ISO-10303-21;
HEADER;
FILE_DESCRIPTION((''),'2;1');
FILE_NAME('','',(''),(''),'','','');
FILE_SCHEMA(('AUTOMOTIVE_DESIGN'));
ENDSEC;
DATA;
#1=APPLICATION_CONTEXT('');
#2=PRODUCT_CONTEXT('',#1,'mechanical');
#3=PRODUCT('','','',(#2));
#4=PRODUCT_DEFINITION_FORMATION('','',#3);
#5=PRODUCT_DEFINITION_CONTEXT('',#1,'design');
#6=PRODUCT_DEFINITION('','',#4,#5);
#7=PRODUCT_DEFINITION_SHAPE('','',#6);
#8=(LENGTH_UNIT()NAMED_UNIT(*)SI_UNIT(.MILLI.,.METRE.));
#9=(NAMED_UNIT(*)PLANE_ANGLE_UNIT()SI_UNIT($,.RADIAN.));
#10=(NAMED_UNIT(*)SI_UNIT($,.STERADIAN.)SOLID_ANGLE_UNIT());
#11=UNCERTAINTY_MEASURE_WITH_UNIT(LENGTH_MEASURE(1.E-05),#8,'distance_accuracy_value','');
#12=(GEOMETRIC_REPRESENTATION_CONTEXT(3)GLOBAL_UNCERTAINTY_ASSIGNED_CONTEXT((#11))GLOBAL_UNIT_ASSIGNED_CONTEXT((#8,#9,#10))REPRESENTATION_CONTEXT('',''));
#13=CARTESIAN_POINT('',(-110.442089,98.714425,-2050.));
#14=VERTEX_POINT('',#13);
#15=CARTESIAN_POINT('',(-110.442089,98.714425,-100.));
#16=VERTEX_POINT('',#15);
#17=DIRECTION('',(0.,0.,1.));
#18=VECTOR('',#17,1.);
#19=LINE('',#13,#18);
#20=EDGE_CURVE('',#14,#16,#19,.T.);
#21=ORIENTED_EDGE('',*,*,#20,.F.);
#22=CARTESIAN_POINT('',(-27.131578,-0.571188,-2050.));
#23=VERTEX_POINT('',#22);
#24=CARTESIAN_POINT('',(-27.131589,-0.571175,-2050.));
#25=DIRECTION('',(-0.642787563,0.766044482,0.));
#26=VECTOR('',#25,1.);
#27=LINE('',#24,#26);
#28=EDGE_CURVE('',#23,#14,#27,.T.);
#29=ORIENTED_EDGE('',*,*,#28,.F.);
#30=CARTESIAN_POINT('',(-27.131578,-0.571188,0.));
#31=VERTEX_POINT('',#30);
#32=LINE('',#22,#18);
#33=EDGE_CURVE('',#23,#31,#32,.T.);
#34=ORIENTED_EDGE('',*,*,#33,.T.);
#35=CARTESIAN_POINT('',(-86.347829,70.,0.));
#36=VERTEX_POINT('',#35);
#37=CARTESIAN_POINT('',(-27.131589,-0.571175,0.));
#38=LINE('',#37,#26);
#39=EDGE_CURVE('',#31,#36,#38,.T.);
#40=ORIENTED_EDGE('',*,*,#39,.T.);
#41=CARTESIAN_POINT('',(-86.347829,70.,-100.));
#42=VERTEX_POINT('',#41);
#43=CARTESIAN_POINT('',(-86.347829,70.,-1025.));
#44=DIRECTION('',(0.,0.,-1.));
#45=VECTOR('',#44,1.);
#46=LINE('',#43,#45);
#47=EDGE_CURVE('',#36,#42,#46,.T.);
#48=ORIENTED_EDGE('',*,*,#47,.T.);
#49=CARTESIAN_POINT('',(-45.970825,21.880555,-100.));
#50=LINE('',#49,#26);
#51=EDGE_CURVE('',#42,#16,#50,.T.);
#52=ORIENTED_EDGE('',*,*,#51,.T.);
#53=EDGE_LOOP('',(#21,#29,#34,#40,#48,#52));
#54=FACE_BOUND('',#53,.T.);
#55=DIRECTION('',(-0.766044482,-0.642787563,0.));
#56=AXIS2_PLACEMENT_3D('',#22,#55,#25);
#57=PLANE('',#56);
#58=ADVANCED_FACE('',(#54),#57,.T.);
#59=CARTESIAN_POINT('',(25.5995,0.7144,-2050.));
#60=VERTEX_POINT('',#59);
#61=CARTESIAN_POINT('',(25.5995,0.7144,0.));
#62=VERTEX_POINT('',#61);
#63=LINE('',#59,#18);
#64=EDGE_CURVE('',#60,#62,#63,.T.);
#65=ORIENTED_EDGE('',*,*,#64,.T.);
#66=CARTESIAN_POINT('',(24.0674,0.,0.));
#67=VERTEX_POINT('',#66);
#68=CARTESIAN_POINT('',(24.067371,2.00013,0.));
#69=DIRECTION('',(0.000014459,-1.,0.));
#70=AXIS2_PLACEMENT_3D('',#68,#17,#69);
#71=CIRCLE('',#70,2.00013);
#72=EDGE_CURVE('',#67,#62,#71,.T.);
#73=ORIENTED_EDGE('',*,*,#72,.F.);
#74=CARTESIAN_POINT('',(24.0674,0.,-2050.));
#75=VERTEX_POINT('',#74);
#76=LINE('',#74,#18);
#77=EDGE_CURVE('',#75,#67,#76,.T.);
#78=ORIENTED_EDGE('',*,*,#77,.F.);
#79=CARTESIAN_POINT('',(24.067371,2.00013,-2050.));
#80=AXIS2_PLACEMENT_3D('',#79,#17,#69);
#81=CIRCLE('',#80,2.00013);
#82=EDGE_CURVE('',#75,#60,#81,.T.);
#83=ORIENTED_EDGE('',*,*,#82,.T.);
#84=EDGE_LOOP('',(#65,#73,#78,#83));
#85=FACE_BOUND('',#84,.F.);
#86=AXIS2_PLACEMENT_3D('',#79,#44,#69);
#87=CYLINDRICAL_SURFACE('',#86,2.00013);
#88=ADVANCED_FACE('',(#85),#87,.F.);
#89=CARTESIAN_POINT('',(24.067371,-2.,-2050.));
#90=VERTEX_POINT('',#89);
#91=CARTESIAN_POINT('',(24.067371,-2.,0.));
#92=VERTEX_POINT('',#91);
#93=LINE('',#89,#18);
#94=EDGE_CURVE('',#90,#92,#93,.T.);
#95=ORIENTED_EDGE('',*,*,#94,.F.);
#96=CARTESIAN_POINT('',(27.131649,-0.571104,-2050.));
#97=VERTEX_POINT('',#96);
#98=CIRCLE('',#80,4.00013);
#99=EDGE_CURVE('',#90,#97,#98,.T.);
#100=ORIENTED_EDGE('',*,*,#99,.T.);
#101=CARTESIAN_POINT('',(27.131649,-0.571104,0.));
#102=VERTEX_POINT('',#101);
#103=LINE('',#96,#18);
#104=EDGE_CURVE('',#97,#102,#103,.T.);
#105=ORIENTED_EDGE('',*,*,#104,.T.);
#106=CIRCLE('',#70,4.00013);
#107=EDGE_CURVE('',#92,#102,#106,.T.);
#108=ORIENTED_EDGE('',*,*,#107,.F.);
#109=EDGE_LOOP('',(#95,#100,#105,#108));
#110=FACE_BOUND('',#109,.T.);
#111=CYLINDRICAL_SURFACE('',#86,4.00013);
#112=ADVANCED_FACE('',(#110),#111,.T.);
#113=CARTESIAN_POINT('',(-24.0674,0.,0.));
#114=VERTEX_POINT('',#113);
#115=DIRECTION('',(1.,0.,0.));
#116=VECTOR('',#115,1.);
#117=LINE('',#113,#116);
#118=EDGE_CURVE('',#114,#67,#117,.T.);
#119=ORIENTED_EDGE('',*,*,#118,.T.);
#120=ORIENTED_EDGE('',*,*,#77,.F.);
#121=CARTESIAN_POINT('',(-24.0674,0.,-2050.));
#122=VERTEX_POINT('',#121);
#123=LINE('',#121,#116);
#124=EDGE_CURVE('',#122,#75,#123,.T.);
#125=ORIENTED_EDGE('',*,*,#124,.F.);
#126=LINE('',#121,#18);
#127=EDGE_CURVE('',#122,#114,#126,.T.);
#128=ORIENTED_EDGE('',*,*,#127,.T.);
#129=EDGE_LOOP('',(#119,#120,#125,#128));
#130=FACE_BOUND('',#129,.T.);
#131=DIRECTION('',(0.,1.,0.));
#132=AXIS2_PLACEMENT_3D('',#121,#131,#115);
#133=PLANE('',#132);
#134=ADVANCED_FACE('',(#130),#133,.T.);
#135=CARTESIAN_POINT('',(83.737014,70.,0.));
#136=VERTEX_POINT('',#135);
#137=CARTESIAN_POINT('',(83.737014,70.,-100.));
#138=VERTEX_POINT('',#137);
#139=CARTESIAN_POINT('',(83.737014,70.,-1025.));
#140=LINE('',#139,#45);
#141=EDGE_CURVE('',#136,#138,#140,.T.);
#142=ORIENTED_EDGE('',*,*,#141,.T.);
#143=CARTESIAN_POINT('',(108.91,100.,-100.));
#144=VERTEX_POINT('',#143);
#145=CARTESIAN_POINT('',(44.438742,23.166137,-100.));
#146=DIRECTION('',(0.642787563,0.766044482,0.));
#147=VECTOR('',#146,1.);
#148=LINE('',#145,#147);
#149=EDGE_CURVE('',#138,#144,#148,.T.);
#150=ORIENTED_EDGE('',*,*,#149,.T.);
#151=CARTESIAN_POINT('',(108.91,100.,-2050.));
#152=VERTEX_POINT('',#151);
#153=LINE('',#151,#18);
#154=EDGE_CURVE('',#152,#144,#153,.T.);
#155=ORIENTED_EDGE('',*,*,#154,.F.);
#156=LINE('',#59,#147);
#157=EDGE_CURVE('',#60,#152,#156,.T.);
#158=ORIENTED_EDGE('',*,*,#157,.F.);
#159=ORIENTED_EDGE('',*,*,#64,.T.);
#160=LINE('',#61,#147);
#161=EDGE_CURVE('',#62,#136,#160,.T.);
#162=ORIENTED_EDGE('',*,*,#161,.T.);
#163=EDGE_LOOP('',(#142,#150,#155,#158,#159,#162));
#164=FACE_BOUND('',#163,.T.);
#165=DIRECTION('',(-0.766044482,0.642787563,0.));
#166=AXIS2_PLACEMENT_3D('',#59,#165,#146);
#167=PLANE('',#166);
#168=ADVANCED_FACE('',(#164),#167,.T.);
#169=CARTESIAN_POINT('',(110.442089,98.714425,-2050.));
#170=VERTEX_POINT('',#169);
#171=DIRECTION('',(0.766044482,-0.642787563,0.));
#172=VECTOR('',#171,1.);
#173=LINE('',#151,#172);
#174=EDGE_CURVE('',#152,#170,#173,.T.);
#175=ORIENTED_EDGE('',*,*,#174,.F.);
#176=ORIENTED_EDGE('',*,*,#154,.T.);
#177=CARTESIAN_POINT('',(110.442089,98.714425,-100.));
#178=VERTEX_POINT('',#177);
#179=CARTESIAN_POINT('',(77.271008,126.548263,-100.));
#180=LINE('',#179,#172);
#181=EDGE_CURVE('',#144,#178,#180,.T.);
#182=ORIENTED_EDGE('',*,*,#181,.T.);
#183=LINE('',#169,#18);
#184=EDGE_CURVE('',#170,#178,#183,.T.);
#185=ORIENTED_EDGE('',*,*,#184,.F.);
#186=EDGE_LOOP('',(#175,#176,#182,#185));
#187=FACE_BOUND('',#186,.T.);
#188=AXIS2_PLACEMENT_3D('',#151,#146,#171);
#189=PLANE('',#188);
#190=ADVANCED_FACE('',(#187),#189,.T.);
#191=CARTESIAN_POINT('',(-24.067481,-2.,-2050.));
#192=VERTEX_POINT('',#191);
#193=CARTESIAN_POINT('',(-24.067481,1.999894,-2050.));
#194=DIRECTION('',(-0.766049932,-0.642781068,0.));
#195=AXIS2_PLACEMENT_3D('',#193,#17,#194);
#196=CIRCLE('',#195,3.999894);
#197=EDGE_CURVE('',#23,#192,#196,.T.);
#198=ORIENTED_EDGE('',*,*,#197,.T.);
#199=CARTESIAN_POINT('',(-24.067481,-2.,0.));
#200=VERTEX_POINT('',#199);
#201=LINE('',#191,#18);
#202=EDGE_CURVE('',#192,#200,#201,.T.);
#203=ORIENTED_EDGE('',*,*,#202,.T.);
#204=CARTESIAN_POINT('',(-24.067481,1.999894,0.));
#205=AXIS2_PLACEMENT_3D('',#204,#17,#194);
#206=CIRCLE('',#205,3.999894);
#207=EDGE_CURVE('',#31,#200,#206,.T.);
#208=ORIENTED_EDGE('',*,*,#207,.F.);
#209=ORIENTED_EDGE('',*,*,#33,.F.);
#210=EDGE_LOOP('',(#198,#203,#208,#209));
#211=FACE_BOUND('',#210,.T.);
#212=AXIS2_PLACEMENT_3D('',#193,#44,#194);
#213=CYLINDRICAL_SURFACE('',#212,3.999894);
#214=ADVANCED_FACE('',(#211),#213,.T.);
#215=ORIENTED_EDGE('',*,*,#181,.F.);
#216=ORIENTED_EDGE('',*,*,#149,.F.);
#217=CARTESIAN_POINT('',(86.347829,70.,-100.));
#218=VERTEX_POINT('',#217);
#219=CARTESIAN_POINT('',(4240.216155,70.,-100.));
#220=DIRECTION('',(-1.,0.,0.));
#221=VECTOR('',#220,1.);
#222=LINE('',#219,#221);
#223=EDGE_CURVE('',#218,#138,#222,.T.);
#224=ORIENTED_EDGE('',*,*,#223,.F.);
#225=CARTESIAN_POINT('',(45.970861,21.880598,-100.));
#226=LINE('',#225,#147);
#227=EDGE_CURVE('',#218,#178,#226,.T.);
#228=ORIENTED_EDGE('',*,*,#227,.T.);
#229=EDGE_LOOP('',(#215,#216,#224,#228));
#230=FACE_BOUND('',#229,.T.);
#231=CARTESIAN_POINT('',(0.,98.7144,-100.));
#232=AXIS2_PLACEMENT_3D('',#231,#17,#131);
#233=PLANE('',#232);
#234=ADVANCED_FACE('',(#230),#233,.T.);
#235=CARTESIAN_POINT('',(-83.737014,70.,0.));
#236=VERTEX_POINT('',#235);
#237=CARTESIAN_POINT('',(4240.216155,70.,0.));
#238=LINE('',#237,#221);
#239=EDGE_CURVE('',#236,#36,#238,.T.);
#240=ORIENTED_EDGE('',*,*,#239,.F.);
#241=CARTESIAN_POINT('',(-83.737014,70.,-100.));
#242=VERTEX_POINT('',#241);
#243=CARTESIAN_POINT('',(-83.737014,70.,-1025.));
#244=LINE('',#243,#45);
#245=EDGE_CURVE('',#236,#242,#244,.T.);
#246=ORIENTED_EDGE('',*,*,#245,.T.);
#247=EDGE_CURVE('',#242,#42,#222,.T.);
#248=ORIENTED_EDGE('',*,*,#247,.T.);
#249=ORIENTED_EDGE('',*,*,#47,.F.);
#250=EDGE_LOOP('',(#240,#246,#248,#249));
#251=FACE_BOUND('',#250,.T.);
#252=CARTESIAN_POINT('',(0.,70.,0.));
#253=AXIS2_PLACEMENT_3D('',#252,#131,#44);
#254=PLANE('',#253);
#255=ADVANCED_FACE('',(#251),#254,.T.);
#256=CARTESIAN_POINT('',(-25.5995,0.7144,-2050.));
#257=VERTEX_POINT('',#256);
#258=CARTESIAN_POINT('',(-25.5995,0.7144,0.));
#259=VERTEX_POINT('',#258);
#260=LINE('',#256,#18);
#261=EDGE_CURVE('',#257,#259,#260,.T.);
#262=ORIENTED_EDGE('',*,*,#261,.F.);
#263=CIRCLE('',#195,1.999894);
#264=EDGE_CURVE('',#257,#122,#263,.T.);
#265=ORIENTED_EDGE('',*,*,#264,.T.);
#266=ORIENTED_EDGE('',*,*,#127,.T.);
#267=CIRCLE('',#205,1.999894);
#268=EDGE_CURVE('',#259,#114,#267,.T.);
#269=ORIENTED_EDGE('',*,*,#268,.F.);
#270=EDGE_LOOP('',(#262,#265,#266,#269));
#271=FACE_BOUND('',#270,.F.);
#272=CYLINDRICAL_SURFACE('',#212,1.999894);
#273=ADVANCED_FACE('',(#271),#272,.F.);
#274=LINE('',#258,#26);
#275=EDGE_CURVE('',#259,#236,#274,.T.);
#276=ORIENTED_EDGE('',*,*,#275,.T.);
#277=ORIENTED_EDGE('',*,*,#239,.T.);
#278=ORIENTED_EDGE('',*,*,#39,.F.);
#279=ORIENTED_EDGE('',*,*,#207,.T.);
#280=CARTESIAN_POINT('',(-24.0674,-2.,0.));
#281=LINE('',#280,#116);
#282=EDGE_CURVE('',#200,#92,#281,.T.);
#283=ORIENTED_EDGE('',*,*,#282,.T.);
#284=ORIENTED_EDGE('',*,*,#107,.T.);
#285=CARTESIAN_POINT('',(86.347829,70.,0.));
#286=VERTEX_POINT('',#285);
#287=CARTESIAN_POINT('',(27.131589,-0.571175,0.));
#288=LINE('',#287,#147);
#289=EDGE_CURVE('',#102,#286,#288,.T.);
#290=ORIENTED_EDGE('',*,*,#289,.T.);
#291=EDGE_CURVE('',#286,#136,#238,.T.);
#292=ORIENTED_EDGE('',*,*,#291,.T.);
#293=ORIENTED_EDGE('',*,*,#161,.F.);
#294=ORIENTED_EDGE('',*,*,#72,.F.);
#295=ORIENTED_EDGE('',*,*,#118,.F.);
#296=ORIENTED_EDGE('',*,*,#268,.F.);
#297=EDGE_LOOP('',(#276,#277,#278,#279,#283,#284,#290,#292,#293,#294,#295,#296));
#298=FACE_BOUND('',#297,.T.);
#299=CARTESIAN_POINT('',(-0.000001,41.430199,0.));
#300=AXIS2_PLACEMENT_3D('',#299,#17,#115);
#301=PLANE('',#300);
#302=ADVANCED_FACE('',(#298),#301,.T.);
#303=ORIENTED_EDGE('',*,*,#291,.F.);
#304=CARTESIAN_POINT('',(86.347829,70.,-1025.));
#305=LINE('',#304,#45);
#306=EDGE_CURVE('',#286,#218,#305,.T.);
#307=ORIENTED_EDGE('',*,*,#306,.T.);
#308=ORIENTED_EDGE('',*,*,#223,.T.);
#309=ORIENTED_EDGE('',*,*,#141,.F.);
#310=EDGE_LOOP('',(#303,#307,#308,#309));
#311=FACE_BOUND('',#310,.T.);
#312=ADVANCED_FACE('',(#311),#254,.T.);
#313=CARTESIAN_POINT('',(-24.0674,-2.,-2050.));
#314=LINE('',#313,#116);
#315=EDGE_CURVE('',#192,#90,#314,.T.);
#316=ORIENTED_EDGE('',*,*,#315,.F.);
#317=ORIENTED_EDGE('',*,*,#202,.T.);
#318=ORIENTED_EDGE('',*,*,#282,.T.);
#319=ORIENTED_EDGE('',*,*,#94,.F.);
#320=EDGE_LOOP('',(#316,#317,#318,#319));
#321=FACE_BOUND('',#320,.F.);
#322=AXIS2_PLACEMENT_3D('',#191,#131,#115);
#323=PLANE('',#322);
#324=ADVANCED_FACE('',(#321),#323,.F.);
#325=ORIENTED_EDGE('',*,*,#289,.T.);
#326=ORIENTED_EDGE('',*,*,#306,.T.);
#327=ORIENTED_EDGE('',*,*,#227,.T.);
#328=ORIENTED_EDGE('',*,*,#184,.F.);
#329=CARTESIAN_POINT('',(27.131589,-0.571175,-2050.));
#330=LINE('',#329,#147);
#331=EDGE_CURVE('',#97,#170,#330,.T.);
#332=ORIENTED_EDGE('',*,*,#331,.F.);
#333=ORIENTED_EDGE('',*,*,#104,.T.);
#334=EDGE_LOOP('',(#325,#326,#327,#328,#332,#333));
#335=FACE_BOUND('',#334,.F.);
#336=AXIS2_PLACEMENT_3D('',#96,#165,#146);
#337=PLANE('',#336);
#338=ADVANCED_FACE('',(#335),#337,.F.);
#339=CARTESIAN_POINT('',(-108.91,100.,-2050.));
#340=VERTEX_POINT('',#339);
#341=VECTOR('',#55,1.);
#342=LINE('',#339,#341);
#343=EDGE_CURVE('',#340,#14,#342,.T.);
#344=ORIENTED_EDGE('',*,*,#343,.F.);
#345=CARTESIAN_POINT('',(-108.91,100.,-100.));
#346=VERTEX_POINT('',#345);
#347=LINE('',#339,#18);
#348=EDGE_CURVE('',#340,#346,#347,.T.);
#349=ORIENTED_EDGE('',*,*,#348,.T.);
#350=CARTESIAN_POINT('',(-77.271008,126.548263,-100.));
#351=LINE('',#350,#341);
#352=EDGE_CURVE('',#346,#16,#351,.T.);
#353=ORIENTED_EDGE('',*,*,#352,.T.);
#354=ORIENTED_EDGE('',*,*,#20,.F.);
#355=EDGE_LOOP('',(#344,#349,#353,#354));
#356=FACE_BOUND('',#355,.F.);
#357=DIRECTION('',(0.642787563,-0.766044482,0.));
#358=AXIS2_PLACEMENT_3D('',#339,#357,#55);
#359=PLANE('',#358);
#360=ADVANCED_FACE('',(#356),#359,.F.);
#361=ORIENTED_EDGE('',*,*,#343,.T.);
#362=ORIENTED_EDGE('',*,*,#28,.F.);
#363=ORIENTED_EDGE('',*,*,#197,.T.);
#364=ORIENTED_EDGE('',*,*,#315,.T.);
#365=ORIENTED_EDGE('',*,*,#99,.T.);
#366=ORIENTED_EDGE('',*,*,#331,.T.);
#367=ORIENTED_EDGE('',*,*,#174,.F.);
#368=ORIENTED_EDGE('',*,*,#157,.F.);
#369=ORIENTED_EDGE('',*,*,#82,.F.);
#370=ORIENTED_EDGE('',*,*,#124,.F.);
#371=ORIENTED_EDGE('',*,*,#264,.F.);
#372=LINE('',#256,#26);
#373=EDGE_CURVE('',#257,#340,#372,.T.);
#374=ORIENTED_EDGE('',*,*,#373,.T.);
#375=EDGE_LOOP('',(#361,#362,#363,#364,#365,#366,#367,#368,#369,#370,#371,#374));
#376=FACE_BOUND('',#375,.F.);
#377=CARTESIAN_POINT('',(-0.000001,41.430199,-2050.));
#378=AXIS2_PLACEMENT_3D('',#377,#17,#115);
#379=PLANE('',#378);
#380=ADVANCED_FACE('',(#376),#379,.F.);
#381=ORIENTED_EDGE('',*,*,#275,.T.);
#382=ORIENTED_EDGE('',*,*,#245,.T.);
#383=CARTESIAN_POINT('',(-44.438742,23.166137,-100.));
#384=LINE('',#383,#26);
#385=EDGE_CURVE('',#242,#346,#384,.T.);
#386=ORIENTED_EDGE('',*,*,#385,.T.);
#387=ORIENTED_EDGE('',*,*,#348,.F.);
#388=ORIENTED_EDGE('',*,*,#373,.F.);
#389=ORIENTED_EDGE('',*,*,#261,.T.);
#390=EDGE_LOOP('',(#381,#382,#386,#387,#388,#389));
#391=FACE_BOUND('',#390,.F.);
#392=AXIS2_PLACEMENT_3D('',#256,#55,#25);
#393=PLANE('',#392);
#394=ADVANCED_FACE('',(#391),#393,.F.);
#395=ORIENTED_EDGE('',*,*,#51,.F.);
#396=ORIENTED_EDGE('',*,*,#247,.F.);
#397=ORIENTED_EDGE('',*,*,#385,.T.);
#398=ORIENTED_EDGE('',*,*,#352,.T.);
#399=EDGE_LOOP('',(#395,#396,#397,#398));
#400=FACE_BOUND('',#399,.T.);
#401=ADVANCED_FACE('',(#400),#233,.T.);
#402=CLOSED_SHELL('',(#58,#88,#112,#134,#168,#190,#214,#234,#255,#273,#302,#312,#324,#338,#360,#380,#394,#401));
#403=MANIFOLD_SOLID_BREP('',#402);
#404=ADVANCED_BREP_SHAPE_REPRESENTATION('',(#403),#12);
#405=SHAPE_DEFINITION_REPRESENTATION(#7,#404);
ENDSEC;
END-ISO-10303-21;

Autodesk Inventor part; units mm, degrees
ref_plane "YZ Plane" through (0, 0, 0) normal (1, 0, 0) x (0, 1, 0)
ref_plane "XZ Plane" through (0, 0, 0) normal (0, 1, 0) x (-1, 0, 0)
ref_plane "XY Plane" through (0, 0, 0) normal (0, 0, 1) x (1, 0, 0)
sketch "Sketch4" plane through (0, 0, 0) normal (0, 0, 1) x (1, 0, 0)
  line L0 (-25, 0) -> (-24.0674, 0) construction
  line L1 (25, 0) -> (25.5995, 0.7144) construction
  line L2 (-25, 0) -> (-25.5995, 0.7144) construction
  line L3 (-108.91, 100) -> (108.91, 100) construction
  arc A0 (-25.5995, 0.7144) -> (-24.0674, 0) centre (-24.0674, 2) ccw
  arc A1 (24.0674, 0) -> (25.5995, 0.7144) centre (24.0674, 2) ccw
  line L4 (24.0674, 0) -> (25, 0) construction
  line L5 (25.5995, 0.7144) -> (108.91, 100)
  line L6 (-25.5995, 0.7144) -> (-108.91, 100)
  line L7 (-24.0674, 0) -> (24.0674, 0)
  point P0 (0, 0)
  point P1 (0, 0)
  point P2 (0, 100)
  point P3 (0, 0)
  dimension "d14" = 217.8199
  dimension "d15" = 50
  dimension "d16" = 100
  dimension "d17" = 2
  dimension "d39" = 130
contour flange "Contour Flange2" sketch "Sketch4" thickness 2 bend radius 2 width 2050 along (0, 0, -1) mid plane no both sides no wall seen from (-67.2547, 50.3572, 0) lies toward (-0.7660444, -0.6427876, 0) curves L6 A0 L7 A1 L5
bend "Bend4"
corner "Corner4"
sketch "Sketch6" plane through (0, 0, 0) normal (1, 0, 0) x (0, 1, 0)
  line L0 (100, -2050) -> (100, 0) projected
  line L1 (-0.5712, 0) -> (98.7144, 0) projected
  line L2 (98.7144, 0) -> (98.7144, -2050) projected
  line L3 (98.7144, 0) -> (100, 0)
  line L4 (70, 0) -> (70, -100)
  line L5 (70, -100) -> (100, -100)
  point P0 (0, 0)
  dimension "d51" = 30
  dimension "d52" = 100
extrude "Extrusion1" cut sketch "Sketch6" along normal through all both and the other way through all
equation "\"d15\" = Лоток_ширина_низ"
equation "\"d16\" = Лоток_высота"
equation "\"d17\" = BendRadius"
equation "\"d39\" = Лоток_угол"
equation "\"d51\" = Лоток_глубина_выреза"
equation "\"d40\" = Thickness"
equation "\"d41\" = BendReliefWidth"
equation "\"d42\" = BendReliefDepth"
equation "\"d43\" = MinimumRemnant"
equation "\"d44\" = TransitionRadius"
equation "\"d46\" = BendRadius"
equation "\"d48\" = CornerReliefSize"
equation "\"d49\" = GapSize"
equation "\"d50\" = JacobiRadiusSize"
equation "\"BendRadius\" = Thickness"
equation "\"BendReliefWidth\" = Thickness"
equation "\"BendReliefDepth\" = 0.5 * Thickness"
equation "\"CornerReliefSize\" = 4 * Thickness"
equation "\"MinimumRemnant\" = 2 * Thickness"
equation "\"TransitionRadius\" = BendRadius"
equation "\"JacobiRadiusSize\" = BendRadius"
equation "\"GapSize\" = Thickness"
equation "\"Лоток_ширина_низ\" = 50"
equation "\"Лоток_ширина_верх\" = 200"
equation "\"Лоток_высота\" = 100"
equation "\"Лоток_угол\" = 130deg"
equation "\"Лоток_глубина_выреза\" = 30"
equation "\"Thickness\" = 2"
properties part number "ДМФ 051 лоток илоотвод"
